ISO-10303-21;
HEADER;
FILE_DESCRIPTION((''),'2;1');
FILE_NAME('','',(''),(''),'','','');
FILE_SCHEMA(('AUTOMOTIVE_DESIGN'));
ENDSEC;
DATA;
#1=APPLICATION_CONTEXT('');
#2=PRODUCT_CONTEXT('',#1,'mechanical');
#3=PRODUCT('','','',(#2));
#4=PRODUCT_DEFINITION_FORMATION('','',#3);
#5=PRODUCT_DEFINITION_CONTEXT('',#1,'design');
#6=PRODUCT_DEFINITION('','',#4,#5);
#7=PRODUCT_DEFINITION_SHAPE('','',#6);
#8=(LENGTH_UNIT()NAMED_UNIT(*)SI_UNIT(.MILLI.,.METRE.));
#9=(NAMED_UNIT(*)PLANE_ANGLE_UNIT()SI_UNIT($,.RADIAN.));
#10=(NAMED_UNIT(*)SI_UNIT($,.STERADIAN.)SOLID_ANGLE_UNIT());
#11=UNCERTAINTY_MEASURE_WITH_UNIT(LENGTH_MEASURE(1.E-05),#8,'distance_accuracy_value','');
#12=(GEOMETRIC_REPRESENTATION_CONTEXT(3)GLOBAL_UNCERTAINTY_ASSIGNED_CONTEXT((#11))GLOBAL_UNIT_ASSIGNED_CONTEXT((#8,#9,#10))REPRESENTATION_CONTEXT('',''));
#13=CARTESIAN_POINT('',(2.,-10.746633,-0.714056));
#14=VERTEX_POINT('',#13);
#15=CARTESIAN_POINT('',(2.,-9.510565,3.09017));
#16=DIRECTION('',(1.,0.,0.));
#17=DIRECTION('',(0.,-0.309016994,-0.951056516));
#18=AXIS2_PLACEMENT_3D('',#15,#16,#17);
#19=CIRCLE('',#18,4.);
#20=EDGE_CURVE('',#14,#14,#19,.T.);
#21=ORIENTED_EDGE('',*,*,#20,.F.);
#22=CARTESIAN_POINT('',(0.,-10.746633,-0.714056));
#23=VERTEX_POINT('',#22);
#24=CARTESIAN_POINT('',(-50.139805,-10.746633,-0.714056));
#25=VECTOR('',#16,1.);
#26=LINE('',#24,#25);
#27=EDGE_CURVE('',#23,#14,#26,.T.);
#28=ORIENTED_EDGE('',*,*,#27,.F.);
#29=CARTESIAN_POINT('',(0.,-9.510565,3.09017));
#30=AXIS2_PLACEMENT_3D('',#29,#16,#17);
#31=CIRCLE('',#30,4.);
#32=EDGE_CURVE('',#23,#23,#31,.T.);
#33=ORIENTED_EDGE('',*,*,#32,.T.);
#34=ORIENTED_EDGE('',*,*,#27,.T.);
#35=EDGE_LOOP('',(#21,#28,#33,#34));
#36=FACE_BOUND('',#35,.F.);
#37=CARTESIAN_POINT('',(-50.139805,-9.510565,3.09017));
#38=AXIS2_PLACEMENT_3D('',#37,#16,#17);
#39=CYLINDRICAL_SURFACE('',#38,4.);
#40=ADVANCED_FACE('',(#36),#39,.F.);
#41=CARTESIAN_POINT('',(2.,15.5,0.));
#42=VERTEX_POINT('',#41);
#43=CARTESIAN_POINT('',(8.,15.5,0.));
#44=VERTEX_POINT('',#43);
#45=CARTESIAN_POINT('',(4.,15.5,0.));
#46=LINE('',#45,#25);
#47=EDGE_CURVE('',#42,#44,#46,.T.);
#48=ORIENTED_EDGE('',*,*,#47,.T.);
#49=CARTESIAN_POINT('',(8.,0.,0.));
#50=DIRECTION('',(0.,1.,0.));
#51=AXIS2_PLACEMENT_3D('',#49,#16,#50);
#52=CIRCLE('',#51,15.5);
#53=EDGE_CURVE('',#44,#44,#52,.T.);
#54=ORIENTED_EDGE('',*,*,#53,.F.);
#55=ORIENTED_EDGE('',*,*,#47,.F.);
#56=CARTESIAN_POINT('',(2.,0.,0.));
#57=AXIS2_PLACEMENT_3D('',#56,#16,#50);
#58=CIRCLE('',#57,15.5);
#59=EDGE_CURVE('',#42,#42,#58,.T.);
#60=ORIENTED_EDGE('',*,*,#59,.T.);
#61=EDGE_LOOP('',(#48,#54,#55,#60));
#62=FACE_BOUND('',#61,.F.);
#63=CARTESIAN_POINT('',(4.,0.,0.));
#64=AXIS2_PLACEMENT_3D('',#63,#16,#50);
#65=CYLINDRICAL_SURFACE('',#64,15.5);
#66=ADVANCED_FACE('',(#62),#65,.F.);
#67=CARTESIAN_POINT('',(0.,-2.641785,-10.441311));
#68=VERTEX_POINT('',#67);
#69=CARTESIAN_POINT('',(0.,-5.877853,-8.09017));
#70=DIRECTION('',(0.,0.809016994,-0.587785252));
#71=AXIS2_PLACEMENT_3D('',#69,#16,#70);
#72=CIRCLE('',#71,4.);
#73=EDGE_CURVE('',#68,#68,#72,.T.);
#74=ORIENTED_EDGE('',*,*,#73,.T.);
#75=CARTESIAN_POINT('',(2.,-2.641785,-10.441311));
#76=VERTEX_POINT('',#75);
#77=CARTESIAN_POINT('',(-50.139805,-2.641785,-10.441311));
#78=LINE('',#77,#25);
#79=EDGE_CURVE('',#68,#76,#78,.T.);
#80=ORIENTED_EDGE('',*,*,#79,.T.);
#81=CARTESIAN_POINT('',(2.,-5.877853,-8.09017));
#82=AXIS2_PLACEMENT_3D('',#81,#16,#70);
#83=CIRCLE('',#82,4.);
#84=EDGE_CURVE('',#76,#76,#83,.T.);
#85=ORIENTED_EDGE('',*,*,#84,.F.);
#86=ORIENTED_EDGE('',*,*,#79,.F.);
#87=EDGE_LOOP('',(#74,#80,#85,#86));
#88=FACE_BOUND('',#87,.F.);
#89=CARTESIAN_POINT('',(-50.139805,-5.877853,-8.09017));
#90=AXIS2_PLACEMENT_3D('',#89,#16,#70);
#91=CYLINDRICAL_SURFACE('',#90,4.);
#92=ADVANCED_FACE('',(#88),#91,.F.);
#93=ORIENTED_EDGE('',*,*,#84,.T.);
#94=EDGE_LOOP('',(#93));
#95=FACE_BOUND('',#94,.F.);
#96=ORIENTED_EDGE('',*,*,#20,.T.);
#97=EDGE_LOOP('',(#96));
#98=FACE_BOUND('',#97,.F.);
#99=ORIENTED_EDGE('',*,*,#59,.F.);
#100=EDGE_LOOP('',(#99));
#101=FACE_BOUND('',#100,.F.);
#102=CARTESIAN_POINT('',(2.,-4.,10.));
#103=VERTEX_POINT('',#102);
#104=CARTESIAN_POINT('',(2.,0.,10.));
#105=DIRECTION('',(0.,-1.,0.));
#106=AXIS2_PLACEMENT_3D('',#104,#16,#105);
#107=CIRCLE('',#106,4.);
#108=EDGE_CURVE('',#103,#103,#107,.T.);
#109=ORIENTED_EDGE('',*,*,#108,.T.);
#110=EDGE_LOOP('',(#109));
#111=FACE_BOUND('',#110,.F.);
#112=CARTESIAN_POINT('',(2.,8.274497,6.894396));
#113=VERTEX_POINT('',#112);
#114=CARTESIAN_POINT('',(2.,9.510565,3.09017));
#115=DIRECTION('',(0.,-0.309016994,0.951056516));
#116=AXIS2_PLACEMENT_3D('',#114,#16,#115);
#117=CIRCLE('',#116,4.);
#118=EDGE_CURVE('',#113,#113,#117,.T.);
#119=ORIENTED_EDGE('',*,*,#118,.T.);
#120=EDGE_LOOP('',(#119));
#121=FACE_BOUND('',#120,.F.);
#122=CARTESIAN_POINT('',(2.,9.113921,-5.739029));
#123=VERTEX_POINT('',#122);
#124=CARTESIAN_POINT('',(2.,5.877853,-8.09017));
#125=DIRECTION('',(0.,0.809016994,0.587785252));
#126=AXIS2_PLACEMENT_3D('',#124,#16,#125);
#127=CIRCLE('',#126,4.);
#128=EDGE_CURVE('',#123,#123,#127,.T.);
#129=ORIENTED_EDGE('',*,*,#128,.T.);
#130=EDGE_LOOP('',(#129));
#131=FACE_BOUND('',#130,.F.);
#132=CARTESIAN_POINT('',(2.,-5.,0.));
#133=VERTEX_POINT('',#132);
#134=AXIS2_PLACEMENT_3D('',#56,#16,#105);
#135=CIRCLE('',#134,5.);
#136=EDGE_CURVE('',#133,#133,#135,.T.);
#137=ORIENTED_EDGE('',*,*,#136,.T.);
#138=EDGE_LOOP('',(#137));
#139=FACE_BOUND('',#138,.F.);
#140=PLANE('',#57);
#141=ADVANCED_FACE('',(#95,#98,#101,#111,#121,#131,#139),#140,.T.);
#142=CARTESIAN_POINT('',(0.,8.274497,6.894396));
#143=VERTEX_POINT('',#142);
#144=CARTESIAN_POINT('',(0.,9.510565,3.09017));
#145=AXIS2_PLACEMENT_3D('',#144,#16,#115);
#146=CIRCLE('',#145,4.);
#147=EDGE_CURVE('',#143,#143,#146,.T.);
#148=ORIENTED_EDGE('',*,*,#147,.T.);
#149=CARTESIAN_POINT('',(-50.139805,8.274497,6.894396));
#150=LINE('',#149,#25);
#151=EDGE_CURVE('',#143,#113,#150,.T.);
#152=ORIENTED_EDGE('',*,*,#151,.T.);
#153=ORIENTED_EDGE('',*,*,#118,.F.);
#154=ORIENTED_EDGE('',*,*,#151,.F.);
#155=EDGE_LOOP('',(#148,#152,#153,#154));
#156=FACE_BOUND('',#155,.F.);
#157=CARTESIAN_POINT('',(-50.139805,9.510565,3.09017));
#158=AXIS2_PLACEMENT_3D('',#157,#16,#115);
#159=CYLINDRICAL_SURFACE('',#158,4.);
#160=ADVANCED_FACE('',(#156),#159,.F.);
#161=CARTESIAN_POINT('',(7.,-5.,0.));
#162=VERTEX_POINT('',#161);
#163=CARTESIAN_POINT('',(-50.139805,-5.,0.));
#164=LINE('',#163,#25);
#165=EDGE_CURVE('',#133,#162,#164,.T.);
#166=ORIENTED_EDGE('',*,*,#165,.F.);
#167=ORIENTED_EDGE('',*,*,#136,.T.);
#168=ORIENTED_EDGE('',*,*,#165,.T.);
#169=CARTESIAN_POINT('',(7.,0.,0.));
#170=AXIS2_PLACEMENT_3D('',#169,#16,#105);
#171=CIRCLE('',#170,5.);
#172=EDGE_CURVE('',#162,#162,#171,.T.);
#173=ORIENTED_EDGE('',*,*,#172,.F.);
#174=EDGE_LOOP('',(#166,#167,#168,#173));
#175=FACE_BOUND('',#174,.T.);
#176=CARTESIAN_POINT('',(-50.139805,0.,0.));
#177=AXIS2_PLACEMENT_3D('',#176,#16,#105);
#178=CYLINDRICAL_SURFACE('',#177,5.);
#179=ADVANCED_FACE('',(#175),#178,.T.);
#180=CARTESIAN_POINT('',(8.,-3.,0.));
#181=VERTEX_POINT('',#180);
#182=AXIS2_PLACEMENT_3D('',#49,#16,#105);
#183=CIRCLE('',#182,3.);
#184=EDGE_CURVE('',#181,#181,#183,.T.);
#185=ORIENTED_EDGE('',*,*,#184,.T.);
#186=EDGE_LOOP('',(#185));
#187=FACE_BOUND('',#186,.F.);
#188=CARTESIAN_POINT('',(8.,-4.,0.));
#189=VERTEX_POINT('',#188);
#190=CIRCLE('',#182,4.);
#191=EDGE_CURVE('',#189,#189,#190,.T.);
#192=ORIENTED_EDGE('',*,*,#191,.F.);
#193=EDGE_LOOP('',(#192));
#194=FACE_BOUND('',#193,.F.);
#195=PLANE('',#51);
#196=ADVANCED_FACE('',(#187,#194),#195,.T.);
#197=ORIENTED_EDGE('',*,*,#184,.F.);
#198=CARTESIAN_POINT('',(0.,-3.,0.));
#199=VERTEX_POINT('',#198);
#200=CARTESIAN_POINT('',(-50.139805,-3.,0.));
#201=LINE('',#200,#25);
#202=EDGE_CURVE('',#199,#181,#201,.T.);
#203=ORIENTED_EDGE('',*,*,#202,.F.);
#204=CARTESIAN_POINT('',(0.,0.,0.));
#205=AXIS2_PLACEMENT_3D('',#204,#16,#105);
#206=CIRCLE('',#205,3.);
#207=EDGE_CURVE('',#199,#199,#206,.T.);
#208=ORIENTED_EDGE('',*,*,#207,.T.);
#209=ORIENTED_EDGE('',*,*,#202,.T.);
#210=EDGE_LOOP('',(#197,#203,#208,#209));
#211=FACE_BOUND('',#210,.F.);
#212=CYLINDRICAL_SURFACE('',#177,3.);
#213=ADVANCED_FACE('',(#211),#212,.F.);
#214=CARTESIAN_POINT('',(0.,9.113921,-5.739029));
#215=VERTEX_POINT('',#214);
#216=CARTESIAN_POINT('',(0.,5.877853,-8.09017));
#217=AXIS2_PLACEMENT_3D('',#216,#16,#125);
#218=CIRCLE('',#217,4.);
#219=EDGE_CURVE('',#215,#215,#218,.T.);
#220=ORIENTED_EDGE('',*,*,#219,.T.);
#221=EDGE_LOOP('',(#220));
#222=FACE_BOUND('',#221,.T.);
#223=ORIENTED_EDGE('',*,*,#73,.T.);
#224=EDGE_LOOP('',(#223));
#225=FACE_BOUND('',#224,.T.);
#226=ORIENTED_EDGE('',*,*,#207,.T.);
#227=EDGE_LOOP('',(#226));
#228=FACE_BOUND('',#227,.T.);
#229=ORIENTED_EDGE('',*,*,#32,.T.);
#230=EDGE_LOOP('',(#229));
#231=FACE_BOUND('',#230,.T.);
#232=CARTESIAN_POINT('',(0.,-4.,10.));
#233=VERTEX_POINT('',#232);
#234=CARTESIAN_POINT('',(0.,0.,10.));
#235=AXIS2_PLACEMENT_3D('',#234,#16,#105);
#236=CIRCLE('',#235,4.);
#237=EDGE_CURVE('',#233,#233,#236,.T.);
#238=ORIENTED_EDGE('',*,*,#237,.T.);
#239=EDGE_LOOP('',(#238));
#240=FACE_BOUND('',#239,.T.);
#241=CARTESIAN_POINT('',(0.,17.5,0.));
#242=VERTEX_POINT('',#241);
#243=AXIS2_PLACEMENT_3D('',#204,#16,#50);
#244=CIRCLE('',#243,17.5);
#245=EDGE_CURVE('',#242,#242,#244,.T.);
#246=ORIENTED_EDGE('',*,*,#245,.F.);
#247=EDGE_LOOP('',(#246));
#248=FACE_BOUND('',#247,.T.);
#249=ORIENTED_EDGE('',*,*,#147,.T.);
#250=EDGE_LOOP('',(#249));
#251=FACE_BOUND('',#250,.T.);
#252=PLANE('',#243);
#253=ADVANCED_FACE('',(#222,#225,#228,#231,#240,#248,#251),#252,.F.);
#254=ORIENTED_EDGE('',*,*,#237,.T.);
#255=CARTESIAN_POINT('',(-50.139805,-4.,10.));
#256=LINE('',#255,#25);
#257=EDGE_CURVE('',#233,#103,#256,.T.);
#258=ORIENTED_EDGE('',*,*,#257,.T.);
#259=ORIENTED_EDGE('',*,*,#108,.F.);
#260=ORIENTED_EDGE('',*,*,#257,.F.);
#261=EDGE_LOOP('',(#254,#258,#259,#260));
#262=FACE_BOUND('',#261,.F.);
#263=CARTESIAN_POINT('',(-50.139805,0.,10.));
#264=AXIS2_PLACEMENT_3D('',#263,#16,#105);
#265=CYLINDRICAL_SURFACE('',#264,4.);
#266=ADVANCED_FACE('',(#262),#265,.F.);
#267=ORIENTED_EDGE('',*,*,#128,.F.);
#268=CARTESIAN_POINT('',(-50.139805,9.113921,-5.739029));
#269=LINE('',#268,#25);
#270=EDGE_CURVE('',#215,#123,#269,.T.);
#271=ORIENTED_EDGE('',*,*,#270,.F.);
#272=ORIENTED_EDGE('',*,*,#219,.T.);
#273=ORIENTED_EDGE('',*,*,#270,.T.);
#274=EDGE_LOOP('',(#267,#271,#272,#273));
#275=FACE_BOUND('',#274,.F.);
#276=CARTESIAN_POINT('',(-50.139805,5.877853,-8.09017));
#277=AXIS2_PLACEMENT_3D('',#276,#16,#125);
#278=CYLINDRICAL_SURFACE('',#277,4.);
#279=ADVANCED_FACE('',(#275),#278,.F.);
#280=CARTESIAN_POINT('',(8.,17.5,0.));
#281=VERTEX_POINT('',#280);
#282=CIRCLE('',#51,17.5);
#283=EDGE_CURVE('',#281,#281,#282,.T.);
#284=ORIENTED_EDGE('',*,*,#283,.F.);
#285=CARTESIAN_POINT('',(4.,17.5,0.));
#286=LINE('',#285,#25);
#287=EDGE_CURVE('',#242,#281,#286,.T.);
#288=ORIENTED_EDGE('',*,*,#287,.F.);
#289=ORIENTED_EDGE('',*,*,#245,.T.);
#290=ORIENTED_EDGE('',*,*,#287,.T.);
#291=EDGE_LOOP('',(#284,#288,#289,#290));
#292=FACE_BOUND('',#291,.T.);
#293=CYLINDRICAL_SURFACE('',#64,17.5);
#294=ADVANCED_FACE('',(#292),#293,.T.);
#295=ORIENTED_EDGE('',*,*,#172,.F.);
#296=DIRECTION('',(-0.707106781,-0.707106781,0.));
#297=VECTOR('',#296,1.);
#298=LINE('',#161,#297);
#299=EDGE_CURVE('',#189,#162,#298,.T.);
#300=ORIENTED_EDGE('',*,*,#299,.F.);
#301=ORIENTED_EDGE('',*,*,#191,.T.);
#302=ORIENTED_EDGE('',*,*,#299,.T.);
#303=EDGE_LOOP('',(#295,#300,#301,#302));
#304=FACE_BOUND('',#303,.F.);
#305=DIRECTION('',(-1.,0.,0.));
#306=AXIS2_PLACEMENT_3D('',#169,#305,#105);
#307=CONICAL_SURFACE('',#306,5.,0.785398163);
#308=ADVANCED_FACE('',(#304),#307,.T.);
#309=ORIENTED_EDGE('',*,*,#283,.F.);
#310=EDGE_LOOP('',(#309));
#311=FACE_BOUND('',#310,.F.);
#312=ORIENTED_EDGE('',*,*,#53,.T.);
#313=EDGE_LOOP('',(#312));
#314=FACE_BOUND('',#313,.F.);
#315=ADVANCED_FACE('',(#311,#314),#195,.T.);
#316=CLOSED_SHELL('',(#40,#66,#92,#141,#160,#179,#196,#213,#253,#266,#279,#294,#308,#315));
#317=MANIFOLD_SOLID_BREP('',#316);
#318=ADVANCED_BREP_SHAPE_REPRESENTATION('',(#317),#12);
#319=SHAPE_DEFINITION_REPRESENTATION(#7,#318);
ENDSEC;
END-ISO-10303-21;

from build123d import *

# Parameters (mm, degrees)
F0_W            = 8
F0_H            = 17.5
F3_D            = 6
F4_T            = -2
F6_D            = 8
F6_COPIES_COUNT = 5
F7_SIZE         = 1


# Not quite as in the source:
# - a pattern or mirror of a feature is missing from the dataset's text; its kind, count and spacing are read off the source's solid


with BuildPart() as f1:
    # F0 (on Top) → F1 (revolve)
    with BuildSketch(Plane.XY):
        with Locations((4, 8.75)):
            Rectangle(F0_W, F0_H)
    revolve(axis=Axis((4, 0, 0), (1, 0, 0)))

    # F3 (through all)
    with Locations(Plane(origin=(0, 0, 0), x_dir=(0, 1, 0), z_dir=(-1, 0, 0))):
        with Locations((0, 0)):
            Hole(F3_D / 2)

    # F4
    f4_openings = [f1.faces().sort_by_distance(p)[0] for p in [
        (8, -17.005025, 0),
    ]]
    offset(amount=F4_T, openings=f4_openings)

    # F6 (through all)
    with Locations(Plane(origin=(0, 0, 0), x_dir=(0, 1, 0), z_dir=(-1, 0, 0))):
        with Locations((0, -10)):
            f6 = Hole(F6_D / 2)

    # F6_copies: F6 ×5 about axis
    f6_copies_axis = Axis((0, 0, 0), (1, 0, 0))
    for i in range(1, F6_COPIES_COUNT):
        add(f6.rotate(f6_copies_axis, i * 360 / F6_COPIES_COUNT), mode=Mode.SUBTRACT)

    # F7
    f7_edges = [f1.edges().sort_by_distance(p)[0] for p in [
        (8, -5, 0),
    ]]
    chamfer(f7_edges, length=F7_SIZE)


solid = f1.part
